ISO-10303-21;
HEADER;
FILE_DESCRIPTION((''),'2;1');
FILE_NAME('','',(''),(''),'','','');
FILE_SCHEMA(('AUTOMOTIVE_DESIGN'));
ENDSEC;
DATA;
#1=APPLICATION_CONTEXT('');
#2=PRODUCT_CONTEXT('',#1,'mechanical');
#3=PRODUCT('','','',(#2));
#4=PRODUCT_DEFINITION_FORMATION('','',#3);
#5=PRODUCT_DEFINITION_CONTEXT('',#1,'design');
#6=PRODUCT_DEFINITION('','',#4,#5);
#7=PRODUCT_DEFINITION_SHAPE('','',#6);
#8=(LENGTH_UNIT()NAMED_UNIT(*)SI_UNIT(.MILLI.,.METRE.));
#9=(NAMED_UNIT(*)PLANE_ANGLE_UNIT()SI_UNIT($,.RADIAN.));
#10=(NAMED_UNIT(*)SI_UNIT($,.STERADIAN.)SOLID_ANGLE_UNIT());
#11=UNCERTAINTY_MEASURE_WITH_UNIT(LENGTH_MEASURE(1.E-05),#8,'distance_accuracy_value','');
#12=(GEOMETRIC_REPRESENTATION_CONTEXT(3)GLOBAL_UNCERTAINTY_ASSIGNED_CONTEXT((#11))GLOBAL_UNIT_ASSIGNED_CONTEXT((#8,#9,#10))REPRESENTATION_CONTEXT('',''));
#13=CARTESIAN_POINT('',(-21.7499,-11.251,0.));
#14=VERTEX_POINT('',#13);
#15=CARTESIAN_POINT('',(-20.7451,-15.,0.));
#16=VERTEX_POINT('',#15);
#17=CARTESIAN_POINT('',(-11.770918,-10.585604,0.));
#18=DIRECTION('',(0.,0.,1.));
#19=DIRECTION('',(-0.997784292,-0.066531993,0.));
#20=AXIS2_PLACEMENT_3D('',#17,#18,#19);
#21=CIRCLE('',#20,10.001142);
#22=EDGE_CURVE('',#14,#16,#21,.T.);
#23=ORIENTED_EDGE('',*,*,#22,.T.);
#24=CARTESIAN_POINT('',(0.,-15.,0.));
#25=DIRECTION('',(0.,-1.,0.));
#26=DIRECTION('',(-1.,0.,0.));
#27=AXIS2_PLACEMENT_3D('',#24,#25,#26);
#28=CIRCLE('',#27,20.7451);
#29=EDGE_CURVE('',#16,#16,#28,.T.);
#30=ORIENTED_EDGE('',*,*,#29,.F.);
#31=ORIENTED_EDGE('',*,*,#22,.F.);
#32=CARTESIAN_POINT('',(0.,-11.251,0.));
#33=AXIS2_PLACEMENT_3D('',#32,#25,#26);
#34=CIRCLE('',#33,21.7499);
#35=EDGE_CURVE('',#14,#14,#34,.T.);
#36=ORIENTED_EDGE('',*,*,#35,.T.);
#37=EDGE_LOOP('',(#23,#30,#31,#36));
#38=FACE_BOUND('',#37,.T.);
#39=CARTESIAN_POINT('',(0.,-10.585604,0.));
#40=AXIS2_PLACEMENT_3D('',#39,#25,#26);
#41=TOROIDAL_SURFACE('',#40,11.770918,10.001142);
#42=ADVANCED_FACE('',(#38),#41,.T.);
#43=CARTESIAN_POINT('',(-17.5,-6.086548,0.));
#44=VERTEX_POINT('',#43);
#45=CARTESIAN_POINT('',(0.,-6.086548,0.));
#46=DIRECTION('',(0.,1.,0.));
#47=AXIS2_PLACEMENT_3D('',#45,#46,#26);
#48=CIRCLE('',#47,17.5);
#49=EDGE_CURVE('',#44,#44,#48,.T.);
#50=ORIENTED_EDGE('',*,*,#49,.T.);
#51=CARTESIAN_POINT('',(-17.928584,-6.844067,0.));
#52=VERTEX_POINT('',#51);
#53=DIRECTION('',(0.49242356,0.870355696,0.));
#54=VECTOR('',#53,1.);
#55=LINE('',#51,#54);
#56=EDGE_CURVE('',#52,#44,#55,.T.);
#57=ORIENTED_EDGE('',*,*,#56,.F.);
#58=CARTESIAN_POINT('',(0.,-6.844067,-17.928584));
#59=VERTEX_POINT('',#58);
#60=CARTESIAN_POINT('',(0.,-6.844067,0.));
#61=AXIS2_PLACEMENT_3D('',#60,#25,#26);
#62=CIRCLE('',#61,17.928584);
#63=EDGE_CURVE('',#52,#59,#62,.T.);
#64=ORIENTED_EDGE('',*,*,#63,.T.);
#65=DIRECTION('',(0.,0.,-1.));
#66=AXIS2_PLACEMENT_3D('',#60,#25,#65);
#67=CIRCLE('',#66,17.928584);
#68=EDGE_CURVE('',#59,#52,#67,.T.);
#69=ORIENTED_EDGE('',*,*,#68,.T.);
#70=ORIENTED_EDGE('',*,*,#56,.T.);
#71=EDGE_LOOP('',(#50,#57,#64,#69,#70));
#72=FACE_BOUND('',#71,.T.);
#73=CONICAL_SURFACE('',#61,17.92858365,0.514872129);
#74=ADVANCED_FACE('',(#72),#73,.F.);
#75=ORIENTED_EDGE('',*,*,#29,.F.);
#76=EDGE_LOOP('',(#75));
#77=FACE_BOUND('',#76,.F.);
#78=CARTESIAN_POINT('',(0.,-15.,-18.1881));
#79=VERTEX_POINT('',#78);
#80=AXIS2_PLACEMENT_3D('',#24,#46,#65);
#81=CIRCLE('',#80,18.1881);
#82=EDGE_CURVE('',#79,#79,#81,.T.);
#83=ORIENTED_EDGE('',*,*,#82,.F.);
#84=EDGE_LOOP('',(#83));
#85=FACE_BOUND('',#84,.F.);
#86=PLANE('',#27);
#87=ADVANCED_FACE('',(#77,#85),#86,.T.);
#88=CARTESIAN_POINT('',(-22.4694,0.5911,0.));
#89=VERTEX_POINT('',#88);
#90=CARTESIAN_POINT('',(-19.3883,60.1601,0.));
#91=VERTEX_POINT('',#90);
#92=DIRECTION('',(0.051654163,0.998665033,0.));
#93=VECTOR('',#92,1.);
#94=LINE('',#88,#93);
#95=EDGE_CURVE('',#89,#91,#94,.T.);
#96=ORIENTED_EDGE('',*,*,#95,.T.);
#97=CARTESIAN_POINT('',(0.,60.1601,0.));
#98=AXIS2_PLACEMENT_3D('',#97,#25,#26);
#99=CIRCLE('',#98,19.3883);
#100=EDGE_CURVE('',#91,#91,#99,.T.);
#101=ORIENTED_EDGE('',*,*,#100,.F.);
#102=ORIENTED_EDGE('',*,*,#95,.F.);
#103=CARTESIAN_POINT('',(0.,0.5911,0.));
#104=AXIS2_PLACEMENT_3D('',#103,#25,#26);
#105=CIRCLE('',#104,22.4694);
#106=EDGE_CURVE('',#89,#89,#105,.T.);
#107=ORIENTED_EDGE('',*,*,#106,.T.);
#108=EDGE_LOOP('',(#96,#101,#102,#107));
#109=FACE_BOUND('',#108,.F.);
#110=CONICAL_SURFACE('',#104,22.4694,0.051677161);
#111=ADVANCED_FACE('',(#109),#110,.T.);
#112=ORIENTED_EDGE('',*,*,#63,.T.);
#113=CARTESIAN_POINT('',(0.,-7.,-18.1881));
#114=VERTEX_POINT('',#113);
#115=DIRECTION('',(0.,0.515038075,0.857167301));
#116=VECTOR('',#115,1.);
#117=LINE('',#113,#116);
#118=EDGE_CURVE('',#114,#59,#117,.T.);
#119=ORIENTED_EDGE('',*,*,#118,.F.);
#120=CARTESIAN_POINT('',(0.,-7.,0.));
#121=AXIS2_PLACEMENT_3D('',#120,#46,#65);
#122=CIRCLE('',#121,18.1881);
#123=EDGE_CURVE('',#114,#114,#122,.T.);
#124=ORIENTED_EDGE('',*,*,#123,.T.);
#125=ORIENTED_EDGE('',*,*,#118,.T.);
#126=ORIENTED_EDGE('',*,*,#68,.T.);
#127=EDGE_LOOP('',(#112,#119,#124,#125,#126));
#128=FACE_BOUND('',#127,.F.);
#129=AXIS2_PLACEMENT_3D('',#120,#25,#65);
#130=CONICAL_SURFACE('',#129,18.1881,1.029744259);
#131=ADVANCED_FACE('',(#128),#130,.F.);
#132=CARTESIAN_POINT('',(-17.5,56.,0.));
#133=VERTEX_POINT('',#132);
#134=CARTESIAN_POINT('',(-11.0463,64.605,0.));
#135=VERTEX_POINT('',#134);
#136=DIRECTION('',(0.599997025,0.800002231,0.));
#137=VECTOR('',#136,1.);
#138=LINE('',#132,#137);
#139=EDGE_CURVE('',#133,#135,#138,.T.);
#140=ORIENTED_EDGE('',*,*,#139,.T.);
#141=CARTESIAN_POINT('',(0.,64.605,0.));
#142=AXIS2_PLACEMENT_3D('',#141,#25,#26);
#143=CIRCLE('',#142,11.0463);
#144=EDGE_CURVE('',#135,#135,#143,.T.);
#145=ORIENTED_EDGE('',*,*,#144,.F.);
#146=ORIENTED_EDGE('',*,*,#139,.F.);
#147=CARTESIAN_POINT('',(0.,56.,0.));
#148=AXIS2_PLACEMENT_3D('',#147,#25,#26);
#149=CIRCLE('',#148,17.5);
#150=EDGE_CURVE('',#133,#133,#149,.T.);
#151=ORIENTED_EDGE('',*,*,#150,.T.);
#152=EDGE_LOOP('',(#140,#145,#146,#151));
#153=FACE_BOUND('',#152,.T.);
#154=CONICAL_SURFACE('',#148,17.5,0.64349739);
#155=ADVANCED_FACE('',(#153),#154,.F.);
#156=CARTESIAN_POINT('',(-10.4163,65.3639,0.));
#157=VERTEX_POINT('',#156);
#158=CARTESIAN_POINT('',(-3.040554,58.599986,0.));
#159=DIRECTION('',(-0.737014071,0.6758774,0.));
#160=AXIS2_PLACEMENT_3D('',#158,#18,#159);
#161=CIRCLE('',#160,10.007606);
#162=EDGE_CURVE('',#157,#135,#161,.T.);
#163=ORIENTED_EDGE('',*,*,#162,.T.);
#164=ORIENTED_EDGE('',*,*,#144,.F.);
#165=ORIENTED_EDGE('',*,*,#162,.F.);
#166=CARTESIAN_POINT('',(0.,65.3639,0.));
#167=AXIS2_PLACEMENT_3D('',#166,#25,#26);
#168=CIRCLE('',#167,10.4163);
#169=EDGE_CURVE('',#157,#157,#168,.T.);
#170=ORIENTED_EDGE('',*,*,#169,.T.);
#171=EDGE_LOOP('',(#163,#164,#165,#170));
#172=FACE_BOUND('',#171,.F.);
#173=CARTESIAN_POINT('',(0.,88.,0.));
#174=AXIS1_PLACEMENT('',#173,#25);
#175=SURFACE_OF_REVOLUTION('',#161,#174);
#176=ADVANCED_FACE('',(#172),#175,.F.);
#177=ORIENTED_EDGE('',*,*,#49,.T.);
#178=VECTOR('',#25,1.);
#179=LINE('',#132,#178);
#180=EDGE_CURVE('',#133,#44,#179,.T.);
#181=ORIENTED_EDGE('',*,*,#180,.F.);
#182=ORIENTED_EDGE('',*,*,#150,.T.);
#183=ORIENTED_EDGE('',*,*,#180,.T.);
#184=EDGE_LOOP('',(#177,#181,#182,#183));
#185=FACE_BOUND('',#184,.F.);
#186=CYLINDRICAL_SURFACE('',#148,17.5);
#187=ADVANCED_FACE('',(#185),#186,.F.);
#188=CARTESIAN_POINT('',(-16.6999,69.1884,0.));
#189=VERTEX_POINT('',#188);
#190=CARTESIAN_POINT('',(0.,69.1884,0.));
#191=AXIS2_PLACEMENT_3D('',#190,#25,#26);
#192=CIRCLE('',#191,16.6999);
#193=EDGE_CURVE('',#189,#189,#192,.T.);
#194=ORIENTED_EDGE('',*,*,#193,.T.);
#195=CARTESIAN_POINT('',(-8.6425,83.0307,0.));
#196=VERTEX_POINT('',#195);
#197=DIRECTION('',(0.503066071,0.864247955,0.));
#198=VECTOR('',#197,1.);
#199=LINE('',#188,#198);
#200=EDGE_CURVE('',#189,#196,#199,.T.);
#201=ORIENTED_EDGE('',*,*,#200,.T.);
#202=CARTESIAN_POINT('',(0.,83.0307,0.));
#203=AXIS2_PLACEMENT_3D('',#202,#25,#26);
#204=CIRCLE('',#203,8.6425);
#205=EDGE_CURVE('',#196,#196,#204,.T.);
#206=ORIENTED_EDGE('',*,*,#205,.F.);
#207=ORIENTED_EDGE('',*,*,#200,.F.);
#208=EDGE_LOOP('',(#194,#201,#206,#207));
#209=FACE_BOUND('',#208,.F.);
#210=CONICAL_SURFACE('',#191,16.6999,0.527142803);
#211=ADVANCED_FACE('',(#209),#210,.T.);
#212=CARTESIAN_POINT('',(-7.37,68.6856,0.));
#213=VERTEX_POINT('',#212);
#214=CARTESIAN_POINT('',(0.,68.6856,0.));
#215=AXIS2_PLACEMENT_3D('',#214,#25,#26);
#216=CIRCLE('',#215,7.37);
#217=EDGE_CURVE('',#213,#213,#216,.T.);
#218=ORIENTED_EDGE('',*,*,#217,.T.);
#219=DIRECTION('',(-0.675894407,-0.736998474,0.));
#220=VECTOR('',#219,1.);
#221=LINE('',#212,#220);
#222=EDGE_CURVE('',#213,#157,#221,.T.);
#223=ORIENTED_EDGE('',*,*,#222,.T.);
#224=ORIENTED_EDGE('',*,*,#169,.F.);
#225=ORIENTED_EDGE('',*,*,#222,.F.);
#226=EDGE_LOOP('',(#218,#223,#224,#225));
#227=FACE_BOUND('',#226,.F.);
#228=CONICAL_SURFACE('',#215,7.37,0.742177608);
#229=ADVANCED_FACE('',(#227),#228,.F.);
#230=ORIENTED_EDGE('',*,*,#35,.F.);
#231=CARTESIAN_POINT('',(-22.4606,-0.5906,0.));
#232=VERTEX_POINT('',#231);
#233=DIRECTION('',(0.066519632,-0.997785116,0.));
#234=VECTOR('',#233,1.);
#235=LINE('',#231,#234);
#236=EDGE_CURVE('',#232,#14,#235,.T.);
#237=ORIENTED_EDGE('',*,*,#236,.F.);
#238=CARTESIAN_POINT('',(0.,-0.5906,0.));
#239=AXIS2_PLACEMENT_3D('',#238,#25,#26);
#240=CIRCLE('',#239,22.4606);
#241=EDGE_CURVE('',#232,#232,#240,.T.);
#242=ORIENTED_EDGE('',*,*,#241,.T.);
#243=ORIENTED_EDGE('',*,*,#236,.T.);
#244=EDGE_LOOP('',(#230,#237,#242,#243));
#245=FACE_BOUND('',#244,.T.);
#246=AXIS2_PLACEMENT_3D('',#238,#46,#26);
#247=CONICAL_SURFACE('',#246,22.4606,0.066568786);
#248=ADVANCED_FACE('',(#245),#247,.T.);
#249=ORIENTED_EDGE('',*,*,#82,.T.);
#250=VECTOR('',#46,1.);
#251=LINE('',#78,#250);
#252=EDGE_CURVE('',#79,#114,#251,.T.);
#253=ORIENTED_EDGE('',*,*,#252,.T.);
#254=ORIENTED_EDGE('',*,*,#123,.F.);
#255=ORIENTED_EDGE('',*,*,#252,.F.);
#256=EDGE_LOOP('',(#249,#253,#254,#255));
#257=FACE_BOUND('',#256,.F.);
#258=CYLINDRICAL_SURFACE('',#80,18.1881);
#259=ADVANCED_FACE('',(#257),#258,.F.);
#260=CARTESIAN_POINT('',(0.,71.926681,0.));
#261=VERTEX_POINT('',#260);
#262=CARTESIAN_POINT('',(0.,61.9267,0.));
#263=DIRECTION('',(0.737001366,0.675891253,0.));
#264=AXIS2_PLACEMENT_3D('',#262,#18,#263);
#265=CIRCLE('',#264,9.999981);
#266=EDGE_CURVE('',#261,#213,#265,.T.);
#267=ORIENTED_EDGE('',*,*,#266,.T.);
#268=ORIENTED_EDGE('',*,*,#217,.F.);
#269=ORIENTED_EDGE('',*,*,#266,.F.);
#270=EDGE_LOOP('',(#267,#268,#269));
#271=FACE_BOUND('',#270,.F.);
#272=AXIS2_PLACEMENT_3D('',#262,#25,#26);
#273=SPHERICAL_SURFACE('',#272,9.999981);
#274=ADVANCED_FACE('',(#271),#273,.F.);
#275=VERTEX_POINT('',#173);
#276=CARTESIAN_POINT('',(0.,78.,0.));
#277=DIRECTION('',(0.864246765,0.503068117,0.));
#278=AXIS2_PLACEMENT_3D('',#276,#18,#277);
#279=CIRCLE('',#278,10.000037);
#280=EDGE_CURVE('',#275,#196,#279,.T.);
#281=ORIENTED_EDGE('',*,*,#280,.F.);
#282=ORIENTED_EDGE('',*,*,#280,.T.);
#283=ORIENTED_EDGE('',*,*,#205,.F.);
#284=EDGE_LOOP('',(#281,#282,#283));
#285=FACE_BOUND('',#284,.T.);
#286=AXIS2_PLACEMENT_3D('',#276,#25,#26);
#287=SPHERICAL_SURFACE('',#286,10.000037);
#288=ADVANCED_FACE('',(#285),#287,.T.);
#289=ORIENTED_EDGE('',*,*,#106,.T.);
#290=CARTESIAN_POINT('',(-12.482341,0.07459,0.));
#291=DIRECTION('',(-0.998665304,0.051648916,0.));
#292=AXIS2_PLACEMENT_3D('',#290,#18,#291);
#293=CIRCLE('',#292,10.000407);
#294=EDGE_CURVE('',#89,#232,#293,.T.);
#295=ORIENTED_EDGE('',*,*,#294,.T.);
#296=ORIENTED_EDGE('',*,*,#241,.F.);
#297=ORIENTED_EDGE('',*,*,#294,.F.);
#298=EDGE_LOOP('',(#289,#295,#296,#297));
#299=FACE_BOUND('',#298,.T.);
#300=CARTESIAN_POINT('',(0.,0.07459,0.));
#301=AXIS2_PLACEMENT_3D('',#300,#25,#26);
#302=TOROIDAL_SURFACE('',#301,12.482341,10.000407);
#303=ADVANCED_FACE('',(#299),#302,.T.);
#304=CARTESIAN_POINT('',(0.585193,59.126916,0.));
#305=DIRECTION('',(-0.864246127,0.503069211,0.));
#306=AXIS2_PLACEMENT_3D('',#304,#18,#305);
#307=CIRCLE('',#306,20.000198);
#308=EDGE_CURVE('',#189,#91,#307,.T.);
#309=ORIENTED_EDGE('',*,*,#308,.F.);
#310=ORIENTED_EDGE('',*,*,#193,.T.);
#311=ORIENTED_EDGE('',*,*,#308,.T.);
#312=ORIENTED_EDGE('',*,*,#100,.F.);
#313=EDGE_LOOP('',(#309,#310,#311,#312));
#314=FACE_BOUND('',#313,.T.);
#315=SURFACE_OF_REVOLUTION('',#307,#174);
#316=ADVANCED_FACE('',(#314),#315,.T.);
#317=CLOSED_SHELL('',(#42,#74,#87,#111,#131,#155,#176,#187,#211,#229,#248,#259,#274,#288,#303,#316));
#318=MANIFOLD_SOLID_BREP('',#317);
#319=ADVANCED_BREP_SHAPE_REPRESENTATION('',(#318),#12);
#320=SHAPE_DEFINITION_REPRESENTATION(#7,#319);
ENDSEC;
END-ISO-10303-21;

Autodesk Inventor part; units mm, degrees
ref_plane "YZ Plane" through (0, 0, 0) normal (1, 0, 0) x (0, 1, 0)
ref_plane "XZ Plane" through (0, 0, 0) normal (0, 1, 0) x (-1, 0, 0)
ref_plane "XY Plane" through (0, 0, 0) normal (0, 0, 1) x (1, 0, 0)
sketch "Bulb Copy" plane through (0, 0, 0) normal (0, 0, 1) x (1, 0, 0)
  line L0 (-16.5, 55) -> (16.5, 55) construction
  line L1 (16.5, 55) -> (16.5, 0)
  line L2 (16.5, 0) -> (-16.5, 0)
  line L3 (-16.5, 0) -> (-16.5, 55)
  line L4 (-10.5, 63) -> (10.5, 63)
  line L5 (10.5, 63) -> (10.5, 55) construction
  line L6 (10.5, 55) -> (-10.5, 55) construction
  line L7 (-10.5, 55) -> (-10.5, 63) construction
  line L8 (-16.5, 55) -> (-10.5, 63)
  line L9 (10.5, 63) -> (16.5, 55)
  line L10 (0, 63) -> (0, 0)
  point P0 (0, 55)
  dimension "d0" = 33
  dimension "d1" = 55
  dimension "d2" = 21
  dimension "d3" = 63
sketch "Top Sketch" plane through (0, 0, 0) normal (0, 0, 1) x (1, 0, 0)
  line L0 (-17.5, 56) -> (17.5, 56) construction
  line L1 (17.5, 56) -> (17.5, -15) construction
  line L2 (17.5, -15) -> (-17.5, -15) construction
  line L3 (-17.5, -15) -> (-17.5, 56) construction
  line L4 (16.5, 55) -> (16.5, 0) projected
  line L5 (-16.5, 0) -> (-16.5, 55) projected
  line L6 (-19.5, 58) -> (19.5, 58) construction
  line L7 (19.5, 58) -> (19.5, -15) construction
  line L8 (19.5, -15) -> (-19.5, -15) construction
  line L9 (-19.5, -15) -> (-19.5, 58) construction
  line L10 (-22.5, 61) -> (22.5, 61) construction
  line L11 (22.5, 61) -> (22.5, -15) construction
  line L12 (22.5, -15) -> (-22.5, -15) construction
  line L13 (-22.5, -15) -> (-22.5, 61) construction
  line L14 (-10.5, 63) -> (10.5, 63) projected
  line L15 (-16.5, 55) -> (16.5, 55) construction
  line L16 (-22.5, 0) -> (-19.1379, 65) construction
  line L17 (22.5, 0) -> (19.1379, 65) construction
  line L18 (-19.1379, 65) -> (19.1379, 65) construction
  line L19 (-19.1379, 65) -> (0, 97.878) construction
  line L20 (0, 97.878) -> (19.1379, 65) construction
  line L21 (-16.5, 55) -> (-10.5, 63) projected
  line L22 (-22.4694, 0.5911) -> (-19.3883, 60.1601)
  line L23 (-16.6999, 69.1884) -> (-8.6425, 83.0307)
  line L24 (8.6425, 83.0307) -> (16.6999, 69.1884)
  line L25 (19.3883, 60.1601) -> (22.4694, 0.5911)
  arc A0 (-16.6999, 69.1884) -> (-19.3883, 60.1601) centre (0.585, 59.127) ccw
  arc A1 (19.3883, 60.1601) -> (16.6999, 69.1884) centre (-0.585, 59.127) ccw
  arc A2 (8.6425, 83.0307) -> (-8.6425, 83.0307) centre (0, 78) ccw
  line L26 (-22.4606, -0.5906) -> (-21.7499, -11.251)
  line L27 (22.4606, -0.5906) -> (21.5, -15)
  arc A3 (-22.4694, 0.5911) -> (-22.4606, -0.5906) centre (-12.4828, 0.0746) ccw
  arc A4 (22.4606, -0.5906) -> (22.4694, 0.5911) centre (12.4828, 0.0746) ccw
  line L28 (-17.5, 56) -> (-11.0463, 64.605)
  line L29 (-10.75, 65) -> (10.75, 65) construction
  line L30 (11.0463, 64.605) -> (17.5, 56)
  line L31 (10.5, 63) -> (16.5, 55) projected
  line L32 (0, -15) -> (0, 88) construction
  line L33 (17.5, -8) -> (-17.5, -8)
  line L34 (-17.5, 56) -> (-17.5, -8)
  line L35 (17.5, 56) -> (17.5, -8)
  line L36 (0, 88) -> (0, -15)
  line L37 (10.75, 65) -> (0, 76.7219) construction
  line L38 (0, 76.7219) -> (-10.75, 65) construction
  line L39 (10.4163, 65.3639) -> (7.37, 68.6856)
  line L40 (-7.37, 68.6856) -> (-10.4163, 65.3639)
  arc A5 (11.0463, 64.605) -> (10.4163, 65.3639) centre (3.0463, 58.605) ccw
  arc A6 (-10.4163, 65.3639) -> (-11.0463, 64.605) centre (-3.0463, 58.605) ccw
  arc A7 (7.37, 68.6856) -> (-7.37, 68.6856) centre (0, 61.9267) ccw
  line L41 (-17, 0) -> (-17, -31.7952) construction
  line L42 (-17, -31.7952) -> (17, -31.7952) construction
  line L43 (17, -31.7952) -> (17, 0) construction
  line L44 (14.5, 12.1752) -> (-14.5, 12.1752) construction
  line L45 (6.5, 0) -> (-6.5, 0) construction
  line L46 (-6.5, 0) -> (-6.5, -30) construction
  line L47 (-6.5, -30) -> (6.5, -30) construction
  line L48 (6.5, -30) -> (6.5, 0) construction
  line L49 (-6.5, -30) -> (-18.8432, -17.6568) construction
  arc A8 (-21.7499, -11.251) -> (-20.7451, -15) centre (-11.7721, -10.5858) ccw
  line L50 (0, -15) -> (-20.7451, -15)
  point P0 (0, 0)
  point P1 (-21.5, -15)
  point P2 (0, -8)
  point P3 (0, 65)
  point P4 (0, 71.9267)
  point P5 (0, 0)
  point P6 (0, -10)
  point P7 (0, 0)
  point P8 (0, 12.1752)
  dimension "d4" = 1
  dimension "d5" = 2
  dimension "d6" = 3
  dimension "d7" = 15
  dimension "d9" = 1
  dimension "d10" = 2
  dimension "d11" = 3
  dimension "d13" = 2
  dimension "d14" = 20
  dimension "d15" = 20
  dimension "d16" = 10
  dimension "d17" = 1
  dimension "d18" = 1
  dimension "d19" = 10
  dimension "d20" = 10
  dimension "d22" = 8
  dimension "d39" = 33
  dimension "d42" = 10
  dimension "d43" = 10
  dimension "d44" = 10
  dimension "d45" = 34
  dimension "d46" = 29
  dimension "d56" = 88
  dimension "d64" = 13
  dimension "d65" = 30
  dimension "d66" = 10
revolve "Top" add sketch "Top Sketch" angle 360 about axis through (0, 88, 0) along (0, -1, 0) contours L22 A0 L23 A2 L36 A7 L40 A6 L28 L34 L33 L50 A8 L26 A3
sketch "Sketch6" plane through (0, -15, 0) normal (0, -1, 0) x (1, 0, 0)
  circle A0 centre (0, 0) radius 3.2051 construction
hole "Hole3" at (0, -15, 0) direction (0, 1, 0) diameter 36.3762 depth 8 tip angle 118 thread size "M38x1.5" class "6H" standard "ANSI Metric M Profile"
chamfer "Chamfer1" distance 0.5 angle 45 2 edges at (-12.3744, -6.5865, -12.3744) (12.3744, -6.5865, 12.3744)
properties part number "Upper" material "Polycarbonate, Smoke"
